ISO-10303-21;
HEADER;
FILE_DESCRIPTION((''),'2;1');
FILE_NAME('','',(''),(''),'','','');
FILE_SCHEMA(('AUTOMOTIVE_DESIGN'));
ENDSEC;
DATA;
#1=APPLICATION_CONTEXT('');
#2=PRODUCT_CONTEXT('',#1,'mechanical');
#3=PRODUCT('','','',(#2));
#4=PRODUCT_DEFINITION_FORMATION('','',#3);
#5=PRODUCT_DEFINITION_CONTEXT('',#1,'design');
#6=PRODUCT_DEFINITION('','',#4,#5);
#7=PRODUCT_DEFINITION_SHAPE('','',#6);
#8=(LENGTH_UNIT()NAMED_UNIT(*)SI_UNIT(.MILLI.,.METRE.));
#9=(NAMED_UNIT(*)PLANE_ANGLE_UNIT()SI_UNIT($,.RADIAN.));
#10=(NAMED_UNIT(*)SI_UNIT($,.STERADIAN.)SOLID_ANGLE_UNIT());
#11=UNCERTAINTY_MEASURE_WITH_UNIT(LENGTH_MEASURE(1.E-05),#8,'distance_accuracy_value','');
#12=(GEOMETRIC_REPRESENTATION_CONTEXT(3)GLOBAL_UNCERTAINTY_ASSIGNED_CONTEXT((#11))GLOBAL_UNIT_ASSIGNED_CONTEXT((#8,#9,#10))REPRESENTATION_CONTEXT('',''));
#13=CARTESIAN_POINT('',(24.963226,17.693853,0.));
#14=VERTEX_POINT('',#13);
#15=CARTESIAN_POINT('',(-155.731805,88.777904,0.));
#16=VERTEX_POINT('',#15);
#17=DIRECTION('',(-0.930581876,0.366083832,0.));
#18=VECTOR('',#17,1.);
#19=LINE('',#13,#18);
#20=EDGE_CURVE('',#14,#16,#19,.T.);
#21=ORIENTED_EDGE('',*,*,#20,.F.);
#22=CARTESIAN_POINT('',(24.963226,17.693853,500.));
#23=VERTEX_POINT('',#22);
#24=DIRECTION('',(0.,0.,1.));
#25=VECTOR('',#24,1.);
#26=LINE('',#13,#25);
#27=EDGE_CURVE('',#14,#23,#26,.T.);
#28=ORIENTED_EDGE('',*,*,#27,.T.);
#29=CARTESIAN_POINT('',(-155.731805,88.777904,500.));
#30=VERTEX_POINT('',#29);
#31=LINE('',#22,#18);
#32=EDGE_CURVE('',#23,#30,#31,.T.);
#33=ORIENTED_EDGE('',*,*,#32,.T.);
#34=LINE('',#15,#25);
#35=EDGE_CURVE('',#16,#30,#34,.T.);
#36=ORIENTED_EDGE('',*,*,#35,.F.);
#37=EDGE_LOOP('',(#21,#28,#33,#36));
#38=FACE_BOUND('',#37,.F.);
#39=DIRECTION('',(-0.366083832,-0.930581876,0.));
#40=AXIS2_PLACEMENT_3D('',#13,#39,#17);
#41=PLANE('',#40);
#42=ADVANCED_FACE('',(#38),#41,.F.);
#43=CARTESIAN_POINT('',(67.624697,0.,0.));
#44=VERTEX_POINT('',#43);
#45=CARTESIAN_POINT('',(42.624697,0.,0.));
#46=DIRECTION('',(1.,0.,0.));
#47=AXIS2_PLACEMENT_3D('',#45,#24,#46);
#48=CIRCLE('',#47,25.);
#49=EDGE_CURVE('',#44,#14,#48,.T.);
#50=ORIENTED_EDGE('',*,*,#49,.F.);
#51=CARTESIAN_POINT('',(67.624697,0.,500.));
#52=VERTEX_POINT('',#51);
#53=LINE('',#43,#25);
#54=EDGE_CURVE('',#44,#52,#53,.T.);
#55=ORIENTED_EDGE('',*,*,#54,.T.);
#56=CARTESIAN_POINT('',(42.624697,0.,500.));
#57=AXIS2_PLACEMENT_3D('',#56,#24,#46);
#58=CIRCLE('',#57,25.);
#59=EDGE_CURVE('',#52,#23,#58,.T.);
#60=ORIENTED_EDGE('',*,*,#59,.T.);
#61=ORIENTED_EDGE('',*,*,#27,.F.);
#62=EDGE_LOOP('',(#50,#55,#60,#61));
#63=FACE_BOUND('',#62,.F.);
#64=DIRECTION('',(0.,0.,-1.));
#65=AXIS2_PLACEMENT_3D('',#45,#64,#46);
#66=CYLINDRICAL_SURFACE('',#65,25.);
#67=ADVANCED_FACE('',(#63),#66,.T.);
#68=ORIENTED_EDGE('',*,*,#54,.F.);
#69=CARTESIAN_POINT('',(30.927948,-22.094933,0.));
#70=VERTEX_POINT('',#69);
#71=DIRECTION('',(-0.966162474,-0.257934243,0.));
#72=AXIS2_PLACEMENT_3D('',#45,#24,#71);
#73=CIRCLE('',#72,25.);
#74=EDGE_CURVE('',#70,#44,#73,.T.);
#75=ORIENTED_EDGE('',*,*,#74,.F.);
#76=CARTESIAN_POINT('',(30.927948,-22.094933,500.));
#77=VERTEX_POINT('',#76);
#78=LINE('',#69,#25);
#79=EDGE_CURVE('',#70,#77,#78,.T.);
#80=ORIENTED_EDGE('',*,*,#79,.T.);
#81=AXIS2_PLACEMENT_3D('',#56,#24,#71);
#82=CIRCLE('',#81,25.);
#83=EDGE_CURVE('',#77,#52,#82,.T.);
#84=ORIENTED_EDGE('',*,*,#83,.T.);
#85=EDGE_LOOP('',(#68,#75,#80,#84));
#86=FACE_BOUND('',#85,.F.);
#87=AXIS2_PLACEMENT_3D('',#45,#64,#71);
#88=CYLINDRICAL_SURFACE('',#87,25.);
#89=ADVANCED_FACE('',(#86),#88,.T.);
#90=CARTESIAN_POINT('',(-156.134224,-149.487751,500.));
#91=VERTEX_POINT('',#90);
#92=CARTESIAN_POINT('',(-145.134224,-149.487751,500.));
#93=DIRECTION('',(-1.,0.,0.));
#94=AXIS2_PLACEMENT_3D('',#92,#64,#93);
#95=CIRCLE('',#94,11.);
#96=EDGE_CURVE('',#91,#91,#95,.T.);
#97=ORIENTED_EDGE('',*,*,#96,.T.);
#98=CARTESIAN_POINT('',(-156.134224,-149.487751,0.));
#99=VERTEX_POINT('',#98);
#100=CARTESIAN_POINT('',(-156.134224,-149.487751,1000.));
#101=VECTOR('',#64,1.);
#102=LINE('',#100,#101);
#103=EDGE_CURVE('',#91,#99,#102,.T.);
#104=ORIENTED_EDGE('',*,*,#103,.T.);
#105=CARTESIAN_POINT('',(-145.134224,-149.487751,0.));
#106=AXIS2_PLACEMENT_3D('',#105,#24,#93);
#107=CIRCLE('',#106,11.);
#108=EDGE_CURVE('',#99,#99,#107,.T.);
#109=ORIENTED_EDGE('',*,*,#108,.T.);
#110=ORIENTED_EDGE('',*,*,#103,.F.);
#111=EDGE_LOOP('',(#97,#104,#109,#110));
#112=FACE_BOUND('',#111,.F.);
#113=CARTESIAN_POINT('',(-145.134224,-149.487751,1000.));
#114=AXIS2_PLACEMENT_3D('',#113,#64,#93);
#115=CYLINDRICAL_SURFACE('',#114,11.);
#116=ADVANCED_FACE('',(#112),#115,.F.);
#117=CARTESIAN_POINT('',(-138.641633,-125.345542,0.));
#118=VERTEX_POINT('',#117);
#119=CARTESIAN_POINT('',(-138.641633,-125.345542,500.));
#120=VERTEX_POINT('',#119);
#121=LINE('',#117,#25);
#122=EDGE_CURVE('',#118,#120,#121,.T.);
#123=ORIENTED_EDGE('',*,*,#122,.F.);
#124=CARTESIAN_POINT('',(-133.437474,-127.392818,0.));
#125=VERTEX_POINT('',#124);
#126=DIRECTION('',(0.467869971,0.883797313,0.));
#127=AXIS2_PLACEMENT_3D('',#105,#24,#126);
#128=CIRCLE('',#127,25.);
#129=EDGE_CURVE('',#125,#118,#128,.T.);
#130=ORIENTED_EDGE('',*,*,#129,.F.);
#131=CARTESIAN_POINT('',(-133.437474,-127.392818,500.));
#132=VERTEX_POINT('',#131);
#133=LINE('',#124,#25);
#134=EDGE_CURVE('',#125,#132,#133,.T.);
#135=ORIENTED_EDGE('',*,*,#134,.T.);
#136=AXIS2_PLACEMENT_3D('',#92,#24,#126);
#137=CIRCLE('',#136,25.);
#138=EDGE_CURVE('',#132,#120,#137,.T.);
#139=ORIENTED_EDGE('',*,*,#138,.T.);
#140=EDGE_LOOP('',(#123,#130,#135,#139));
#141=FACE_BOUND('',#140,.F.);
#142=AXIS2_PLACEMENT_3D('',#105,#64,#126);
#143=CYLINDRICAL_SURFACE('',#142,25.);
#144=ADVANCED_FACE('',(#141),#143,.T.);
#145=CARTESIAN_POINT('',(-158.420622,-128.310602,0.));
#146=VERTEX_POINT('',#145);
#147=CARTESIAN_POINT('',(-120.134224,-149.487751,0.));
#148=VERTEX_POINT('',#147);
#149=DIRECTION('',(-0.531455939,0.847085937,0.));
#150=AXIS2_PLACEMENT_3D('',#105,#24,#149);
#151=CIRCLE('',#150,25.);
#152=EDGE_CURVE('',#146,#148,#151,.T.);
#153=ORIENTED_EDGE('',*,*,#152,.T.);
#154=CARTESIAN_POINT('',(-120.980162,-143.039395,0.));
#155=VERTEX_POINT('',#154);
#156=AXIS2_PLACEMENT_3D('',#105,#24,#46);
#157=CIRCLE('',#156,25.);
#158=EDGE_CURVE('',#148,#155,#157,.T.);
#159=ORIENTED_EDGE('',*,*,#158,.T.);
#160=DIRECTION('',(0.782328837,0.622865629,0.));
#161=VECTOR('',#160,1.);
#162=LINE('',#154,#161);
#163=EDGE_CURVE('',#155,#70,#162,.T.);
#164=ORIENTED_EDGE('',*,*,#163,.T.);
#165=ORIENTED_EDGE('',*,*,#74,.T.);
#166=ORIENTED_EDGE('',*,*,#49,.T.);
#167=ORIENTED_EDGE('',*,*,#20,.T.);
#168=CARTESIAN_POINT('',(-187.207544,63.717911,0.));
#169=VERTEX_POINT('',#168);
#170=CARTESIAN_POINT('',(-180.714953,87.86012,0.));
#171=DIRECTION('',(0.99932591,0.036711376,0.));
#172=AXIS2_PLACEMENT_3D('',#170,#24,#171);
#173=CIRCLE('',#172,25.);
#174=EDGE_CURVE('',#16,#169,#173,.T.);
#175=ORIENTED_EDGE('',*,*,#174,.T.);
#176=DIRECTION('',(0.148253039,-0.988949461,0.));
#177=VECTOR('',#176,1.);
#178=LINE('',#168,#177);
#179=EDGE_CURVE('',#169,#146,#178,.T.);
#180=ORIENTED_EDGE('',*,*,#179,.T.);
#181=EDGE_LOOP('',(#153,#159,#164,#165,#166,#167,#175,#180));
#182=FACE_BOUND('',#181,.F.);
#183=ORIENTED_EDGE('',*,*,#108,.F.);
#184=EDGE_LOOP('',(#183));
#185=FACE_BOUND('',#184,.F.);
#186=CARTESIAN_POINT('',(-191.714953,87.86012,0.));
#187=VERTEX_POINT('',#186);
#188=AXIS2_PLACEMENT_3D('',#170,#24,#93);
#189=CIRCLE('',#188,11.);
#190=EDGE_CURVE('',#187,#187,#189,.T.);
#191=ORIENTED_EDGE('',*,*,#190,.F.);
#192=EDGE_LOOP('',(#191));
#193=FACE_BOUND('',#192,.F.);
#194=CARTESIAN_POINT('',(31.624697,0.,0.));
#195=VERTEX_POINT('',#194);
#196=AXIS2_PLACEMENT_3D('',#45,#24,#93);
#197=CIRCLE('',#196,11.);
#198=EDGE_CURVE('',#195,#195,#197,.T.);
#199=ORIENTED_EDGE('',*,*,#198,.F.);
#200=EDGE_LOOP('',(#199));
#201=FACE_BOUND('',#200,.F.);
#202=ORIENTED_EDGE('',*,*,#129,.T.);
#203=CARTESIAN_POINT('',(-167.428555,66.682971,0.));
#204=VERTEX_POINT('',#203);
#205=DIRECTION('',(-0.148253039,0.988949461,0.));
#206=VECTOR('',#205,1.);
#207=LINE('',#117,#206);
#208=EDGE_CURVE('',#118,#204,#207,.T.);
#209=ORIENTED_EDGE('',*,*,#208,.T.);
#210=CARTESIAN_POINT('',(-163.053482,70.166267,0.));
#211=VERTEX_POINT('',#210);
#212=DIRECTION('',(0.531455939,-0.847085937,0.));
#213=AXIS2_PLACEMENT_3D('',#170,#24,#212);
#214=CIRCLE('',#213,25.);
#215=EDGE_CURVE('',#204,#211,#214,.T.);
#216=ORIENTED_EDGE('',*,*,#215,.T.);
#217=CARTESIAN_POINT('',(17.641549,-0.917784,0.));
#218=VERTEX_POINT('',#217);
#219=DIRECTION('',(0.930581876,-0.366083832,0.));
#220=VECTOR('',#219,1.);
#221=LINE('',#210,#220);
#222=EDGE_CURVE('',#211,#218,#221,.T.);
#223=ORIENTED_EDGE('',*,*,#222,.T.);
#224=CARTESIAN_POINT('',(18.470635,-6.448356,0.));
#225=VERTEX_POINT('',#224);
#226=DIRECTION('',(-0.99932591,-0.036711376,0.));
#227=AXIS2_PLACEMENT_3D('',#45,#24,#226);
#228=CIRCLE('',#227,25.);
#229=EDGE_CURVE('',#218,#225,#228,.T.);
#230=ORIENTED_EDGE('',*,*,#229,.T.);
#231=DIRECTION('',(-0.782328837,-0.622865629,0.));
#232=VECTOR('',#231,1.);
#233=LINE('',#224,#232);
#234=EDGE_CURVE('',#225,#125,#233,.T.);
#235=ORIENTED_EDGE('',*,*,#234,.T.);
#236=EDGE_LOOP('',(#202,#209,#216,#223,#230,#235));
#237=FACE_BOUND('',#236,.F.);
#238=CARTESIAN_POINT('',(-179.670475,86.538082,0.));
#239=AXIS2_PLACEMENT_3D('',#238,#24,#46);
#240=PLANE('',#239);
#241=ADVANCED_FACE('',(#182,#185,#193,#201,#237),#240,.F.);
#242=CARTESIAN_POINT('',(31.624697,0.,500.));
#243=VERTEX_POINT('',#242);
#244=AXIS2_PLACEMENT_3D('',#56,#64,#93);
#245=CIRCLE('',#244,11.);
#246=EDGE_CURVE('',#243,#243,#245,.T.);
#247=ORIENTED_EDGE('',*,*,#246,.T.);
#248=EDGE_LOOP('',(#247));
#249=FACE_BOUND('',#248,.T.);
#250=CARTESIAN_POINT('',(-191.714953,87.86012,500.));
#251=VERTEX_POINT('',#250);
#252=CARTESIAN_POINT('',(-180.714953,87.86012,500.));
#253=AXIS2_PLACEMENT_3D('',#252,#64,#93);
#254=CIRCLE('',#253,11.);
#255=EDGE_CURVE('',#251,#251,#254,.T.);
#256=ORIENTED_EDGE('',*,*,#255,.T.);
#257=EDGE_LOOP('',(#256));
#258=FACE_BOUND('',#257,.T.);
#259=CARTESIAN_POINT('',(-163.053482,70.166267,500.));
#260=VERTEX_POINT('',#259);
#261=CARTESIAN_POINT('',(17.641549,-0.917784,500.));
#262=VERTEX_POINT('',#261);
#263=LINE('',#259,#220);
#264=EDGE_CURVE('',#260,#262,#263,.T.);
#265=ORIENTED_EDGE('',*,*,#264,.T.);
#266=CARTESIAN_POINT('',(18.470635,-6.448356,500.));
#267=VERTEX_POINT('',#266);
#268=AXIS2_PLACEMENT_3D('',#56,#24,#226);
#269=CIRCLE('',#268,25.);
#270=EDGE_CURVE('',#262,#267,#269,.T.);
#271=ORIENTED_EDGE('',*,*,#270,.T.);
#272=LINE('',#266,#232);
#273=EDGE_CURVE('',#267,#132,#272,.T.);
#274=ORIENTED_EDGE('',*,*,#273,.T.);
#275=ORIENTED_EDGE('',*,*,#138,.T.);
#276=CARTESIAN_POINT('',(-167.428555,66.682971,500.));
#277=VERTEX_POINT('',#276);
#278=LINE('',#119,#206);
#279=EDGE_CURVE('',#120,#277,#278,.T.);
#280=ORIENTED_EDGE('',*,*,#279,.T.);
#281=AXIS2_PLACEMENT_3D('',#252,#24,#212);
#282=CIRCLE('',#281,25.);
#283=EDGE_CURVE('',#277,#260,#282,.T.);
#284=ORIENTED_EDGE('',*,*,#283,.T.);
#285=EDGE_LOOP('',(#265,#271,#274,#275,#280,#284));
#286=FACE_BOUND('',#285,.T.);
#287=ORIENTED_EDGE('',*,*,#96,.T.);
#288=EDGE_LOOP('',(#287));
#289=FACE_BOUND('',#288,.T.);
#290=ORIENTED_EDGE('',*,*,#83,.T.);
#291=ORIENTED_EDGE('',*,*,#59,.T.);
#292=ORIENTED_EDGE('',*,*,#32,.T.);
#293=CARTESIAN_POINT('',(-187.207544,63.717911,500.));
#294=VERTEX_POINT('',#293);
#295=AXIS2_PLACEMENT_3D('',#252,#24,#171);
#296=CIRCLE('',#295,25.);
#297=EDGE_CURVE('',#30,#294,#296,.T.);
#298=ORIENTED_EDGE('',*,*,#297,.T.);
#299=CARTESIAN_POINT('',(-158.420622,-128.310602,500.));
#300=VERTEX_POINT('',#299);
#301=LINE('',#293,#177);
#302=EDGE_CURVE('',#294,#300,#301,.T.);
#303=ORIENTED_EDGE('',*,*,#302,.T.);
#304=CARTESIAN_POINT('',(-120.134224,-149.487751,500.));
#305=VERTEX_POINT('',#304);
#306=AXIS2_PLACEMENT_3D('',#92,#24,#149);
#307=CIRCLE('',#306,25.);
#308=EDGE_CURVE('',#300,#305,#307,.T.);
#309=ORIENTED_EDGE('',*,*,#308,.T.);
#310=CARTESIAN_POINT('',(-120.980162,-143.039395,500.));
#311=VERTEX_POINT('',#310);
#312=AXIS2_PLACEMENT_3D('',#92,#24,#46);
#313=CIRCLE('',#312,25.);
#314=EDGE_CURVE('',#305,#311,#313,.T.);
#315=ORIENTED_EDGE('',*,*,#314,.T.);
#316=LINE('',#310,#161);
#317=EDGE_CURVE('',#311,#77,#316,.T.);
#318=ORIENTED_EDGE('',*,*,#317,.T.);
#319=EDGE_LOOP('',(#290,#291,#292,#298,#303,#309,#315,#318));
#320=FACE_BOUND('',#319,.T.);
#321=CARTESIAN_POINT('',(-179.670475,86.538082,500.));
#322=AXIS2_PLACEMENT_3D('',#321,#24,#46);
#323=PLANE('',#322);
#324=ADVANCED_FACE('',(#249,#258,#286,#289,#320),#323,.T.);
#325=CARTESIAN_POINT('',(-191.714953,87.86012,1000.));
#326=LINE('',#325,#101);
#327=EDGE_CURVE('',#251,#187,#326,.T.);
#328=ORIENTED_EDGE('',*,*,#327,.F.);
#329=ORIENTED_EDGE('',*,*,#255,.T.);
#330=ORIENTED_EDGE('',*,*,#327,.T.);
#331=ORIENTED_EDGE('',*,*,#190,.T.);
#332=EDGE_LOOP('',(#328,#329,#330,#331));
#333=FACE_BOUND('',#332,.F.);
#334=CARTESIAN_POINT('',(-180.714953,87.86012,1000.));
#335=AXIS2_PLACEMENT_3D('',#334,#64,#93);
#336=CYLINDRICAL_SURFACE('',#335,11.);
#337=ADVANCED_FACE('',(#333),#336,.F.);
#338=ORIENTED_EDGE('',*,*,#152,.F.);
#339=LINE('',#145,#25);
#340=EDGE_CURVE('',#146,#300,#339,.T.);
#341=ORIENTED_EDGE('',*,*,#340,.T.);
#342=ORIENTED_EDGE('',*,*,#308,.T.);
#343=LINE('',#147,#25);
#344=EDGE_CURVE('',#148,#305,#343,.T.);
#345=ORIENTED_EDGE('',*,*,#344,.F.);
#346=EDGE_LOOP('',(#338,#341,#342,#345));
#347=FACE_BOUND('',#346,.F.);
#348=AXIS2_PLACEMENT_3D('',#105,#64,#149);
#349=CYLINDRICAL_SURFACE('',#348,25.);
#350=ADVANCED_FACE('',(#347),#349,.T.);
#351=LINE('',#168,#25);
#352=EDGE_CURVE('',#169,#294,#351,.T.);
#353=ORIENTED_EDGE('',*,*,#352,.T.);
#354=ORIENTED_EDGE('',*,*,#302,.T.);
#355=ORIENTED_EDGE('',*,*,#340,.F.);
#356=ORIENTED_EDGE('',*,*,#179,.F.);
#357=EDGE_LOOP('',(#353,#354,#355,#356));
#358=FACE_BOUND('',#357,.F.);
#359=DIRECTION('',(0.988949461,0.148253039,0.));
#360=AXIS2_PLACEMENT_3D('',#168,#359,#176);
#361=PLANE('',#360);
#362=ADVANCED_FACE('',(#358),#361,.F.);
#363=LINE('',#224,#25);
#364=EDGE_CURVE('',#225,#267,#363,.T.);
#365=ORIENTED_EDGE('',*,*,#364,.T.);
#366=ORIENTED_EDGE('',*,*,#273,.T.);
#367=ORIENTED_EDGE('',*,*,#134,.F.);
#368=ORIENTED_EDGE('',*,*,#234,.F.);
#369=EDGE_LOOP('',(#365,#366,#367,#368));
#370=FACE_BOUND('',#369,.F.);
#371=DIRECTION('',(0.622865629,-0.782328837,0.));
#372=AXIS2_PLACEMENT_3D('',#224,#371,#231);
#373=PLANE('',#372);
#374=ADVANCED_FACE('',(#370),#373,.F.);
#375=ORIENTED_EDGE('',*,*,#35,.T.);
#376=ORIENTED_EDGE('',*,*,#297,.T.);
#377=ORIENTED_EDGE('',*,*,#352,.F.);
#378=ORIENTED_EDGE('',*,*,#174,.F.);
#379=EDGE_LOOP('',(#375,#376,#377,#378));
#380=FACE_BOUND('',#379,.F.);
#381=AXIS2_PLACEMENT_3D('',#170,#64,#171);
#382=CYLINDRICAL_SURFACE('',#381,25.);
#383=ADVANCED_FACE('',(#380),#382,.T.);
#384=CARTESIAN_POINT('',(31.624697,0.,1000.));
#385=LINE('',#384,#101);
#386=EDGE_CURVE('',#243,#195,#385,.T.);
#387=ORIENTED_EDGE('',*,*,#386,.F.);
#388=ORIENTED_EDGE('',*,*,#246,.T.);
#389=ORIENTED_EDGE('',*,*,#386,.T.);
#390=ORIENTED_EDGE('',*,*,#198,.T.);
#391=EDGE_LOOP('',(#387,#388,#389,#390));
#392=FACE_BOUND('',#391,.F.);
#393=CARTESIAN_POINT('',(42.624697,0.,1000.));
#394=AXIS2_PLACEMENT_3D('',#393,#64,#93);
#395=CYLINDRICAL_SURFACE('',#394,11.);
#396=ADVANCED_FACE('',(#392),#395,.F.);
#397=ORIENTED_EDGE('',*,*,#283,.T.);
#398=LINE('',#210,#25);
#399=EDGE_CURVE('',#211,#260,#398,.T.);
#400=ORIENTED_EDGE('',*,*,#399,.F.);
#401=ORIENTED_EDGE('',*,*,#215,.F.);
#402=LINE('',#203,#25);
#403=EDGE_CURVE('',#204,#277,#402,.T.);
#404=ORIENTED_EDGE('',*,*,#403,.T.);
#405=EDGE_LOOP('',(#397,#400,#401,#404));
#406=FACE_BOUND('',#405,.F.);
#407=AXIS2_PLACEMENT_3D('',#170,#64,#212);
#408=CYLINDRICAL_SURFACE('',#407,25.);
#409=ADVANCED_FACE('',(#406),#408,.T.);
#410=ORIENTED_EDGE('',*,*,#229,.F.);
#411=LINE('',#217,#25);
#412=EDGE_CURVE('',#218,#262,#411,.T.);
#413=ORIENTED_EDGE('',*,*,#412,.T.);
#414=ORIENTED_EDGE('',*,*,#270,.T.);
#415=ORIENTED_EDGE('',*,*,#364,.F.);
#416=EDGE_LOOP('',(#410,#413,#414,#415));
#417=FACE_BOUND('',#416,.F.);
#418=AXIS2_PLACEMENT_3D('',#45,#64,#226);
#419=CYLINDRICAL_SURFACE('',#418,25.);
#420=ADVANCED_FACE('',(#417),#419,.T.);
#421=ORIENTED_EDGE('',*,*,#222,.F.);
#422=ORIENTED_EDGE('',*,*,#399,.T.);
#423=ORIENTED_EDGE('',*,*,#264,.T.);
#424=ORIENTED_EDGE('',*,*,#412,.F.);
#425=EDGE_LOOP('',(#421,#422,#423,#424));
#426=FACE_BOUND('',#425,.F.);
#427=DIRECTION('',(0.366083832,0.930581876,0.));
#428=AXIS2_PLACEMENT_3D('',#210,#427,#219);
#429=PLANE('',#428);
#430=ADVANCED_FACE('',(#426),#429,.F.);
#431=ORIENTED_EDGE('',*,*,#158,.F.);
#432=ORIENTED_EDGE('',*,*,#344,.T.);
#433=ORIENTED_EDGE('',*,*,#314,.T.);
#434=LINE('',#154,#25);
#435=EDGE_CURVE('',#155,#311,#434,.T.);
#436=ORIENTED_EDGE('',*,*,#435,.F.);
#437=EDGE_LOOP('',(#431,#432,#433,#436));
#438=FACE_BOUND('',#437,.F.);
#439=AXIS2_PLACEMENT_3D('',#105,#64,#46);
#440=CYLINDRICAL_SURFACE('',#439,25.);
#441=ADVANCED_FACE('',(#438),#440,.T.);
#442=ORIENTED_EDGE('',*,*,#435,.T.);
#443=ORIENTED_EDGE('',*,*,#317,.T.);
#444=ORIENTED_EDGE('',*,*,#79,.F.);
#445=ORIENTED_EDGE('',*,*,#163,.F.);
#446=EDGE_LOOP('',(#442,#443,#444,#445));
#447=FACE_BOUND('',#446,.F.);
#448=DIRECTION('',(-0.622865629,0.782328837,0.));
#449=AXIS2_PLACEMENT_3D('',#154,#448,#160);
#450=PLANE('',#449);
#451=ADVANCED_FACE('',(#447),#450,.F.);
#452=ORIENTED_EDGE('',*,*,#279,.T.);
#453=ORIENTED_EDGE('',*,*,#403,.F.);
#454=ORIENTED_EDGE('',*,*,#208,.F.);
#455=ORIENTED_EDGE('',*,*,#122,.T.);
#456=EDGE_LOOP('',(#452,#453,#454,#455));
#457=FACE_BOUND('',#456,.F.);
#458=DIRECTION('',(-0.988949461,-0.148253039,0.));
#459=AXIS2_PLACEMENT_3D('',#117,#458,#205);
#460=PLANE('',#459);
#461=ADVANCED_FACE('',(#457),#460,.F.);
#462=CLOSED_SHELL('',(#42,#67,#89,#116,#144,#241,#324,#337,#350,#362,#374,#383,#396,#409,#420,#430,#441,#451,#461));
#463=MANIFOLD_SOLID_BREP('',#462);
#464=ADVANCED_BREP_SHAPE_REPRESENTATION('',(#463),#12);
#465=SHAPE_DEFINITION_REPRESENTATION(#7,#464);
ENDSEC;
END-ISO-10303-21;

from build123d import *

# Parameters (mm, degrees)
F2_DEPTH = 500
F4_D     = 22
F4_DEPTH = 500
F4_TIP   = 6.6094668093


with BuildPart() as f2:
    # F1 (on Top) → F2 (new body)
    with BuildSketch(Plane.XY):
        with BuildLine():
            ThreePointArc((-163.0534820056, 70.1662666553), (-157.6223484782, 78.2824576852), (-155.7149531136, 87.8601197772))
            ThreePointArc((-155.7149531136, 87.8601197772), (-155.7191665297, 88.3190893279), (-155.7318053575, 88.7779041722))
            ThreePointArc((-155.7318053575, 88.7779041722), (-196.2865938282, 107.4183406948), (-187.2075438541, 63.7179105685))
            ThreePointArc((-187.2075438541, 63.7179105685), (-177.008627135, 63.1363832526), (-167.4285546343, 66.6829713514))
            ThreePointArc((-167.4285546343, 66.6829713514), (-165.1433123991, 68.3018988597), (-163.0534820056, 70.1662666553))
        make_face()
        with BuildLine():
            ThreePointArc((-167.4285546343, 66.6829713514), (-177.008627135, 63.1363832526), (-187.2075438541, 63.7179105685))
            Line((-187.2075438541, 63.7179105685), (-158.4206221982, -128.3106024335))
            ThreePointArc((-158.4206221982, -128.3106024335), (-148.8405496975, -124.7640143347), (-138.6416329785, -125.3455416506))
            Line((-138.6416329785, -125.3455416506), (-167.4285546343, 66.6829713514))
        make_face()
        with BuildLine():
            ThreePointArc((-138.6416329785, -125.3455416506), (-148.8405496975, -124.7640143347), (-158.4206221982, -128.3106024335))
            ThreePointArc((-158.4206221982, -128.3106024335), (-157.2346377204, -171.364221804), (-120.1342237189, -149.4877508594))
            ThreePointArc((-120.1342237189, -149.4877508594), (-120.346610419, -146.2359472222), (-120.9801618704, -143.0393947726))
            ThreePointArc((-120.9801618704, -143.0393947726), (-125.5760028014, -133.9161101448), (-133.437474442, -127.3928180386))
            ThreePointArc((-133.437474442, -127.3928180386), (-135.9821279087, -126.2232039632), (-138.6416329785, -125.3455416506))
        make_face()
        with BuildLine():
            ThreePointArc((30.9279478124, -22.0949328208), (23.0664761717, -15.5716407145), (18.4706352408, -6.4483560868))
            Line((18.4706352408, -6.4483560868), (-133.437474442, -127.3928180386))
            ThreePointArc((-133.437474442, -127.3928180386), (-125.5760028014, -133.9161101448), (-120.9801618704, -143.0393947726))
            Line((-120.9801618704, -143.0393947726), (30.9279478124, -22.0949328208))
        make_face()
        with BuildLine():
            ThreePointArc((67.6246970892, 0), (52.2023591813, 23.0926046355), (24.9632259812, 17.6938531219))
            ThreePointArc((24.9632259812, 17.6938531219), (19.3601501931, 9.1520958101), (17.6415493331, -0.917784395))
            ThreePointArc((17.6415493331, -0.917784395), (17.9009605645, -3.7063259786), (18.4706352408, -6.4483560868))
            ThreePointArc((18.4706352408, -6.4483560868), (23.0664761717, -15.5716407145), (30.9279478124, -22.0949328208))
            ThreePointArc((30.9279478124, -22.0949328208), (55.5200696716, -21.417501394), (67.6246970892, 0))
        make_face()
        with BuildLine():
            ThreePointArc((-155.7318053575, 88.7779041722), (-155.7191665297, 88.3190893279), (-155.7149531136, 87.8601197772))
            ThreePointArc((-155.7149531136, 87.8601197772), (-157.6223484782, 78.2824576852), (-163.0534820056, 70.1662666553))
            Line((-163.0534820056, 70.1662666553), (17.6415493331, -0.917784395))
            ThreePointArc((17.6415493331, -0.917784395), (19.3601501931, 9.1520958101), (24.9632259812, 17.6938531219))
            Line((24.9632259812, 17.6938531219), (-155.7318053575, 88.7779041722))
        make_face()
    extrude(amount=F2_DEPTH)

    # F4
    with Locations(Plane.XY.offset(500)):
        with Locations((-180.7149531136, 87.8601197772), (42.6246970892, 0), (-145.1342237189, -149.4877508594)):
            Hole(F4_D / 2, depth=F4_DEPTH)
            with Locations((0, 0, -(F4_DEPTH + F4_TIP / 2))):  # 118° drill point
                Cone(0, F4_D / 2, F4_TIP, mode=Mode.SUBTRACT)


solid = f2.part
